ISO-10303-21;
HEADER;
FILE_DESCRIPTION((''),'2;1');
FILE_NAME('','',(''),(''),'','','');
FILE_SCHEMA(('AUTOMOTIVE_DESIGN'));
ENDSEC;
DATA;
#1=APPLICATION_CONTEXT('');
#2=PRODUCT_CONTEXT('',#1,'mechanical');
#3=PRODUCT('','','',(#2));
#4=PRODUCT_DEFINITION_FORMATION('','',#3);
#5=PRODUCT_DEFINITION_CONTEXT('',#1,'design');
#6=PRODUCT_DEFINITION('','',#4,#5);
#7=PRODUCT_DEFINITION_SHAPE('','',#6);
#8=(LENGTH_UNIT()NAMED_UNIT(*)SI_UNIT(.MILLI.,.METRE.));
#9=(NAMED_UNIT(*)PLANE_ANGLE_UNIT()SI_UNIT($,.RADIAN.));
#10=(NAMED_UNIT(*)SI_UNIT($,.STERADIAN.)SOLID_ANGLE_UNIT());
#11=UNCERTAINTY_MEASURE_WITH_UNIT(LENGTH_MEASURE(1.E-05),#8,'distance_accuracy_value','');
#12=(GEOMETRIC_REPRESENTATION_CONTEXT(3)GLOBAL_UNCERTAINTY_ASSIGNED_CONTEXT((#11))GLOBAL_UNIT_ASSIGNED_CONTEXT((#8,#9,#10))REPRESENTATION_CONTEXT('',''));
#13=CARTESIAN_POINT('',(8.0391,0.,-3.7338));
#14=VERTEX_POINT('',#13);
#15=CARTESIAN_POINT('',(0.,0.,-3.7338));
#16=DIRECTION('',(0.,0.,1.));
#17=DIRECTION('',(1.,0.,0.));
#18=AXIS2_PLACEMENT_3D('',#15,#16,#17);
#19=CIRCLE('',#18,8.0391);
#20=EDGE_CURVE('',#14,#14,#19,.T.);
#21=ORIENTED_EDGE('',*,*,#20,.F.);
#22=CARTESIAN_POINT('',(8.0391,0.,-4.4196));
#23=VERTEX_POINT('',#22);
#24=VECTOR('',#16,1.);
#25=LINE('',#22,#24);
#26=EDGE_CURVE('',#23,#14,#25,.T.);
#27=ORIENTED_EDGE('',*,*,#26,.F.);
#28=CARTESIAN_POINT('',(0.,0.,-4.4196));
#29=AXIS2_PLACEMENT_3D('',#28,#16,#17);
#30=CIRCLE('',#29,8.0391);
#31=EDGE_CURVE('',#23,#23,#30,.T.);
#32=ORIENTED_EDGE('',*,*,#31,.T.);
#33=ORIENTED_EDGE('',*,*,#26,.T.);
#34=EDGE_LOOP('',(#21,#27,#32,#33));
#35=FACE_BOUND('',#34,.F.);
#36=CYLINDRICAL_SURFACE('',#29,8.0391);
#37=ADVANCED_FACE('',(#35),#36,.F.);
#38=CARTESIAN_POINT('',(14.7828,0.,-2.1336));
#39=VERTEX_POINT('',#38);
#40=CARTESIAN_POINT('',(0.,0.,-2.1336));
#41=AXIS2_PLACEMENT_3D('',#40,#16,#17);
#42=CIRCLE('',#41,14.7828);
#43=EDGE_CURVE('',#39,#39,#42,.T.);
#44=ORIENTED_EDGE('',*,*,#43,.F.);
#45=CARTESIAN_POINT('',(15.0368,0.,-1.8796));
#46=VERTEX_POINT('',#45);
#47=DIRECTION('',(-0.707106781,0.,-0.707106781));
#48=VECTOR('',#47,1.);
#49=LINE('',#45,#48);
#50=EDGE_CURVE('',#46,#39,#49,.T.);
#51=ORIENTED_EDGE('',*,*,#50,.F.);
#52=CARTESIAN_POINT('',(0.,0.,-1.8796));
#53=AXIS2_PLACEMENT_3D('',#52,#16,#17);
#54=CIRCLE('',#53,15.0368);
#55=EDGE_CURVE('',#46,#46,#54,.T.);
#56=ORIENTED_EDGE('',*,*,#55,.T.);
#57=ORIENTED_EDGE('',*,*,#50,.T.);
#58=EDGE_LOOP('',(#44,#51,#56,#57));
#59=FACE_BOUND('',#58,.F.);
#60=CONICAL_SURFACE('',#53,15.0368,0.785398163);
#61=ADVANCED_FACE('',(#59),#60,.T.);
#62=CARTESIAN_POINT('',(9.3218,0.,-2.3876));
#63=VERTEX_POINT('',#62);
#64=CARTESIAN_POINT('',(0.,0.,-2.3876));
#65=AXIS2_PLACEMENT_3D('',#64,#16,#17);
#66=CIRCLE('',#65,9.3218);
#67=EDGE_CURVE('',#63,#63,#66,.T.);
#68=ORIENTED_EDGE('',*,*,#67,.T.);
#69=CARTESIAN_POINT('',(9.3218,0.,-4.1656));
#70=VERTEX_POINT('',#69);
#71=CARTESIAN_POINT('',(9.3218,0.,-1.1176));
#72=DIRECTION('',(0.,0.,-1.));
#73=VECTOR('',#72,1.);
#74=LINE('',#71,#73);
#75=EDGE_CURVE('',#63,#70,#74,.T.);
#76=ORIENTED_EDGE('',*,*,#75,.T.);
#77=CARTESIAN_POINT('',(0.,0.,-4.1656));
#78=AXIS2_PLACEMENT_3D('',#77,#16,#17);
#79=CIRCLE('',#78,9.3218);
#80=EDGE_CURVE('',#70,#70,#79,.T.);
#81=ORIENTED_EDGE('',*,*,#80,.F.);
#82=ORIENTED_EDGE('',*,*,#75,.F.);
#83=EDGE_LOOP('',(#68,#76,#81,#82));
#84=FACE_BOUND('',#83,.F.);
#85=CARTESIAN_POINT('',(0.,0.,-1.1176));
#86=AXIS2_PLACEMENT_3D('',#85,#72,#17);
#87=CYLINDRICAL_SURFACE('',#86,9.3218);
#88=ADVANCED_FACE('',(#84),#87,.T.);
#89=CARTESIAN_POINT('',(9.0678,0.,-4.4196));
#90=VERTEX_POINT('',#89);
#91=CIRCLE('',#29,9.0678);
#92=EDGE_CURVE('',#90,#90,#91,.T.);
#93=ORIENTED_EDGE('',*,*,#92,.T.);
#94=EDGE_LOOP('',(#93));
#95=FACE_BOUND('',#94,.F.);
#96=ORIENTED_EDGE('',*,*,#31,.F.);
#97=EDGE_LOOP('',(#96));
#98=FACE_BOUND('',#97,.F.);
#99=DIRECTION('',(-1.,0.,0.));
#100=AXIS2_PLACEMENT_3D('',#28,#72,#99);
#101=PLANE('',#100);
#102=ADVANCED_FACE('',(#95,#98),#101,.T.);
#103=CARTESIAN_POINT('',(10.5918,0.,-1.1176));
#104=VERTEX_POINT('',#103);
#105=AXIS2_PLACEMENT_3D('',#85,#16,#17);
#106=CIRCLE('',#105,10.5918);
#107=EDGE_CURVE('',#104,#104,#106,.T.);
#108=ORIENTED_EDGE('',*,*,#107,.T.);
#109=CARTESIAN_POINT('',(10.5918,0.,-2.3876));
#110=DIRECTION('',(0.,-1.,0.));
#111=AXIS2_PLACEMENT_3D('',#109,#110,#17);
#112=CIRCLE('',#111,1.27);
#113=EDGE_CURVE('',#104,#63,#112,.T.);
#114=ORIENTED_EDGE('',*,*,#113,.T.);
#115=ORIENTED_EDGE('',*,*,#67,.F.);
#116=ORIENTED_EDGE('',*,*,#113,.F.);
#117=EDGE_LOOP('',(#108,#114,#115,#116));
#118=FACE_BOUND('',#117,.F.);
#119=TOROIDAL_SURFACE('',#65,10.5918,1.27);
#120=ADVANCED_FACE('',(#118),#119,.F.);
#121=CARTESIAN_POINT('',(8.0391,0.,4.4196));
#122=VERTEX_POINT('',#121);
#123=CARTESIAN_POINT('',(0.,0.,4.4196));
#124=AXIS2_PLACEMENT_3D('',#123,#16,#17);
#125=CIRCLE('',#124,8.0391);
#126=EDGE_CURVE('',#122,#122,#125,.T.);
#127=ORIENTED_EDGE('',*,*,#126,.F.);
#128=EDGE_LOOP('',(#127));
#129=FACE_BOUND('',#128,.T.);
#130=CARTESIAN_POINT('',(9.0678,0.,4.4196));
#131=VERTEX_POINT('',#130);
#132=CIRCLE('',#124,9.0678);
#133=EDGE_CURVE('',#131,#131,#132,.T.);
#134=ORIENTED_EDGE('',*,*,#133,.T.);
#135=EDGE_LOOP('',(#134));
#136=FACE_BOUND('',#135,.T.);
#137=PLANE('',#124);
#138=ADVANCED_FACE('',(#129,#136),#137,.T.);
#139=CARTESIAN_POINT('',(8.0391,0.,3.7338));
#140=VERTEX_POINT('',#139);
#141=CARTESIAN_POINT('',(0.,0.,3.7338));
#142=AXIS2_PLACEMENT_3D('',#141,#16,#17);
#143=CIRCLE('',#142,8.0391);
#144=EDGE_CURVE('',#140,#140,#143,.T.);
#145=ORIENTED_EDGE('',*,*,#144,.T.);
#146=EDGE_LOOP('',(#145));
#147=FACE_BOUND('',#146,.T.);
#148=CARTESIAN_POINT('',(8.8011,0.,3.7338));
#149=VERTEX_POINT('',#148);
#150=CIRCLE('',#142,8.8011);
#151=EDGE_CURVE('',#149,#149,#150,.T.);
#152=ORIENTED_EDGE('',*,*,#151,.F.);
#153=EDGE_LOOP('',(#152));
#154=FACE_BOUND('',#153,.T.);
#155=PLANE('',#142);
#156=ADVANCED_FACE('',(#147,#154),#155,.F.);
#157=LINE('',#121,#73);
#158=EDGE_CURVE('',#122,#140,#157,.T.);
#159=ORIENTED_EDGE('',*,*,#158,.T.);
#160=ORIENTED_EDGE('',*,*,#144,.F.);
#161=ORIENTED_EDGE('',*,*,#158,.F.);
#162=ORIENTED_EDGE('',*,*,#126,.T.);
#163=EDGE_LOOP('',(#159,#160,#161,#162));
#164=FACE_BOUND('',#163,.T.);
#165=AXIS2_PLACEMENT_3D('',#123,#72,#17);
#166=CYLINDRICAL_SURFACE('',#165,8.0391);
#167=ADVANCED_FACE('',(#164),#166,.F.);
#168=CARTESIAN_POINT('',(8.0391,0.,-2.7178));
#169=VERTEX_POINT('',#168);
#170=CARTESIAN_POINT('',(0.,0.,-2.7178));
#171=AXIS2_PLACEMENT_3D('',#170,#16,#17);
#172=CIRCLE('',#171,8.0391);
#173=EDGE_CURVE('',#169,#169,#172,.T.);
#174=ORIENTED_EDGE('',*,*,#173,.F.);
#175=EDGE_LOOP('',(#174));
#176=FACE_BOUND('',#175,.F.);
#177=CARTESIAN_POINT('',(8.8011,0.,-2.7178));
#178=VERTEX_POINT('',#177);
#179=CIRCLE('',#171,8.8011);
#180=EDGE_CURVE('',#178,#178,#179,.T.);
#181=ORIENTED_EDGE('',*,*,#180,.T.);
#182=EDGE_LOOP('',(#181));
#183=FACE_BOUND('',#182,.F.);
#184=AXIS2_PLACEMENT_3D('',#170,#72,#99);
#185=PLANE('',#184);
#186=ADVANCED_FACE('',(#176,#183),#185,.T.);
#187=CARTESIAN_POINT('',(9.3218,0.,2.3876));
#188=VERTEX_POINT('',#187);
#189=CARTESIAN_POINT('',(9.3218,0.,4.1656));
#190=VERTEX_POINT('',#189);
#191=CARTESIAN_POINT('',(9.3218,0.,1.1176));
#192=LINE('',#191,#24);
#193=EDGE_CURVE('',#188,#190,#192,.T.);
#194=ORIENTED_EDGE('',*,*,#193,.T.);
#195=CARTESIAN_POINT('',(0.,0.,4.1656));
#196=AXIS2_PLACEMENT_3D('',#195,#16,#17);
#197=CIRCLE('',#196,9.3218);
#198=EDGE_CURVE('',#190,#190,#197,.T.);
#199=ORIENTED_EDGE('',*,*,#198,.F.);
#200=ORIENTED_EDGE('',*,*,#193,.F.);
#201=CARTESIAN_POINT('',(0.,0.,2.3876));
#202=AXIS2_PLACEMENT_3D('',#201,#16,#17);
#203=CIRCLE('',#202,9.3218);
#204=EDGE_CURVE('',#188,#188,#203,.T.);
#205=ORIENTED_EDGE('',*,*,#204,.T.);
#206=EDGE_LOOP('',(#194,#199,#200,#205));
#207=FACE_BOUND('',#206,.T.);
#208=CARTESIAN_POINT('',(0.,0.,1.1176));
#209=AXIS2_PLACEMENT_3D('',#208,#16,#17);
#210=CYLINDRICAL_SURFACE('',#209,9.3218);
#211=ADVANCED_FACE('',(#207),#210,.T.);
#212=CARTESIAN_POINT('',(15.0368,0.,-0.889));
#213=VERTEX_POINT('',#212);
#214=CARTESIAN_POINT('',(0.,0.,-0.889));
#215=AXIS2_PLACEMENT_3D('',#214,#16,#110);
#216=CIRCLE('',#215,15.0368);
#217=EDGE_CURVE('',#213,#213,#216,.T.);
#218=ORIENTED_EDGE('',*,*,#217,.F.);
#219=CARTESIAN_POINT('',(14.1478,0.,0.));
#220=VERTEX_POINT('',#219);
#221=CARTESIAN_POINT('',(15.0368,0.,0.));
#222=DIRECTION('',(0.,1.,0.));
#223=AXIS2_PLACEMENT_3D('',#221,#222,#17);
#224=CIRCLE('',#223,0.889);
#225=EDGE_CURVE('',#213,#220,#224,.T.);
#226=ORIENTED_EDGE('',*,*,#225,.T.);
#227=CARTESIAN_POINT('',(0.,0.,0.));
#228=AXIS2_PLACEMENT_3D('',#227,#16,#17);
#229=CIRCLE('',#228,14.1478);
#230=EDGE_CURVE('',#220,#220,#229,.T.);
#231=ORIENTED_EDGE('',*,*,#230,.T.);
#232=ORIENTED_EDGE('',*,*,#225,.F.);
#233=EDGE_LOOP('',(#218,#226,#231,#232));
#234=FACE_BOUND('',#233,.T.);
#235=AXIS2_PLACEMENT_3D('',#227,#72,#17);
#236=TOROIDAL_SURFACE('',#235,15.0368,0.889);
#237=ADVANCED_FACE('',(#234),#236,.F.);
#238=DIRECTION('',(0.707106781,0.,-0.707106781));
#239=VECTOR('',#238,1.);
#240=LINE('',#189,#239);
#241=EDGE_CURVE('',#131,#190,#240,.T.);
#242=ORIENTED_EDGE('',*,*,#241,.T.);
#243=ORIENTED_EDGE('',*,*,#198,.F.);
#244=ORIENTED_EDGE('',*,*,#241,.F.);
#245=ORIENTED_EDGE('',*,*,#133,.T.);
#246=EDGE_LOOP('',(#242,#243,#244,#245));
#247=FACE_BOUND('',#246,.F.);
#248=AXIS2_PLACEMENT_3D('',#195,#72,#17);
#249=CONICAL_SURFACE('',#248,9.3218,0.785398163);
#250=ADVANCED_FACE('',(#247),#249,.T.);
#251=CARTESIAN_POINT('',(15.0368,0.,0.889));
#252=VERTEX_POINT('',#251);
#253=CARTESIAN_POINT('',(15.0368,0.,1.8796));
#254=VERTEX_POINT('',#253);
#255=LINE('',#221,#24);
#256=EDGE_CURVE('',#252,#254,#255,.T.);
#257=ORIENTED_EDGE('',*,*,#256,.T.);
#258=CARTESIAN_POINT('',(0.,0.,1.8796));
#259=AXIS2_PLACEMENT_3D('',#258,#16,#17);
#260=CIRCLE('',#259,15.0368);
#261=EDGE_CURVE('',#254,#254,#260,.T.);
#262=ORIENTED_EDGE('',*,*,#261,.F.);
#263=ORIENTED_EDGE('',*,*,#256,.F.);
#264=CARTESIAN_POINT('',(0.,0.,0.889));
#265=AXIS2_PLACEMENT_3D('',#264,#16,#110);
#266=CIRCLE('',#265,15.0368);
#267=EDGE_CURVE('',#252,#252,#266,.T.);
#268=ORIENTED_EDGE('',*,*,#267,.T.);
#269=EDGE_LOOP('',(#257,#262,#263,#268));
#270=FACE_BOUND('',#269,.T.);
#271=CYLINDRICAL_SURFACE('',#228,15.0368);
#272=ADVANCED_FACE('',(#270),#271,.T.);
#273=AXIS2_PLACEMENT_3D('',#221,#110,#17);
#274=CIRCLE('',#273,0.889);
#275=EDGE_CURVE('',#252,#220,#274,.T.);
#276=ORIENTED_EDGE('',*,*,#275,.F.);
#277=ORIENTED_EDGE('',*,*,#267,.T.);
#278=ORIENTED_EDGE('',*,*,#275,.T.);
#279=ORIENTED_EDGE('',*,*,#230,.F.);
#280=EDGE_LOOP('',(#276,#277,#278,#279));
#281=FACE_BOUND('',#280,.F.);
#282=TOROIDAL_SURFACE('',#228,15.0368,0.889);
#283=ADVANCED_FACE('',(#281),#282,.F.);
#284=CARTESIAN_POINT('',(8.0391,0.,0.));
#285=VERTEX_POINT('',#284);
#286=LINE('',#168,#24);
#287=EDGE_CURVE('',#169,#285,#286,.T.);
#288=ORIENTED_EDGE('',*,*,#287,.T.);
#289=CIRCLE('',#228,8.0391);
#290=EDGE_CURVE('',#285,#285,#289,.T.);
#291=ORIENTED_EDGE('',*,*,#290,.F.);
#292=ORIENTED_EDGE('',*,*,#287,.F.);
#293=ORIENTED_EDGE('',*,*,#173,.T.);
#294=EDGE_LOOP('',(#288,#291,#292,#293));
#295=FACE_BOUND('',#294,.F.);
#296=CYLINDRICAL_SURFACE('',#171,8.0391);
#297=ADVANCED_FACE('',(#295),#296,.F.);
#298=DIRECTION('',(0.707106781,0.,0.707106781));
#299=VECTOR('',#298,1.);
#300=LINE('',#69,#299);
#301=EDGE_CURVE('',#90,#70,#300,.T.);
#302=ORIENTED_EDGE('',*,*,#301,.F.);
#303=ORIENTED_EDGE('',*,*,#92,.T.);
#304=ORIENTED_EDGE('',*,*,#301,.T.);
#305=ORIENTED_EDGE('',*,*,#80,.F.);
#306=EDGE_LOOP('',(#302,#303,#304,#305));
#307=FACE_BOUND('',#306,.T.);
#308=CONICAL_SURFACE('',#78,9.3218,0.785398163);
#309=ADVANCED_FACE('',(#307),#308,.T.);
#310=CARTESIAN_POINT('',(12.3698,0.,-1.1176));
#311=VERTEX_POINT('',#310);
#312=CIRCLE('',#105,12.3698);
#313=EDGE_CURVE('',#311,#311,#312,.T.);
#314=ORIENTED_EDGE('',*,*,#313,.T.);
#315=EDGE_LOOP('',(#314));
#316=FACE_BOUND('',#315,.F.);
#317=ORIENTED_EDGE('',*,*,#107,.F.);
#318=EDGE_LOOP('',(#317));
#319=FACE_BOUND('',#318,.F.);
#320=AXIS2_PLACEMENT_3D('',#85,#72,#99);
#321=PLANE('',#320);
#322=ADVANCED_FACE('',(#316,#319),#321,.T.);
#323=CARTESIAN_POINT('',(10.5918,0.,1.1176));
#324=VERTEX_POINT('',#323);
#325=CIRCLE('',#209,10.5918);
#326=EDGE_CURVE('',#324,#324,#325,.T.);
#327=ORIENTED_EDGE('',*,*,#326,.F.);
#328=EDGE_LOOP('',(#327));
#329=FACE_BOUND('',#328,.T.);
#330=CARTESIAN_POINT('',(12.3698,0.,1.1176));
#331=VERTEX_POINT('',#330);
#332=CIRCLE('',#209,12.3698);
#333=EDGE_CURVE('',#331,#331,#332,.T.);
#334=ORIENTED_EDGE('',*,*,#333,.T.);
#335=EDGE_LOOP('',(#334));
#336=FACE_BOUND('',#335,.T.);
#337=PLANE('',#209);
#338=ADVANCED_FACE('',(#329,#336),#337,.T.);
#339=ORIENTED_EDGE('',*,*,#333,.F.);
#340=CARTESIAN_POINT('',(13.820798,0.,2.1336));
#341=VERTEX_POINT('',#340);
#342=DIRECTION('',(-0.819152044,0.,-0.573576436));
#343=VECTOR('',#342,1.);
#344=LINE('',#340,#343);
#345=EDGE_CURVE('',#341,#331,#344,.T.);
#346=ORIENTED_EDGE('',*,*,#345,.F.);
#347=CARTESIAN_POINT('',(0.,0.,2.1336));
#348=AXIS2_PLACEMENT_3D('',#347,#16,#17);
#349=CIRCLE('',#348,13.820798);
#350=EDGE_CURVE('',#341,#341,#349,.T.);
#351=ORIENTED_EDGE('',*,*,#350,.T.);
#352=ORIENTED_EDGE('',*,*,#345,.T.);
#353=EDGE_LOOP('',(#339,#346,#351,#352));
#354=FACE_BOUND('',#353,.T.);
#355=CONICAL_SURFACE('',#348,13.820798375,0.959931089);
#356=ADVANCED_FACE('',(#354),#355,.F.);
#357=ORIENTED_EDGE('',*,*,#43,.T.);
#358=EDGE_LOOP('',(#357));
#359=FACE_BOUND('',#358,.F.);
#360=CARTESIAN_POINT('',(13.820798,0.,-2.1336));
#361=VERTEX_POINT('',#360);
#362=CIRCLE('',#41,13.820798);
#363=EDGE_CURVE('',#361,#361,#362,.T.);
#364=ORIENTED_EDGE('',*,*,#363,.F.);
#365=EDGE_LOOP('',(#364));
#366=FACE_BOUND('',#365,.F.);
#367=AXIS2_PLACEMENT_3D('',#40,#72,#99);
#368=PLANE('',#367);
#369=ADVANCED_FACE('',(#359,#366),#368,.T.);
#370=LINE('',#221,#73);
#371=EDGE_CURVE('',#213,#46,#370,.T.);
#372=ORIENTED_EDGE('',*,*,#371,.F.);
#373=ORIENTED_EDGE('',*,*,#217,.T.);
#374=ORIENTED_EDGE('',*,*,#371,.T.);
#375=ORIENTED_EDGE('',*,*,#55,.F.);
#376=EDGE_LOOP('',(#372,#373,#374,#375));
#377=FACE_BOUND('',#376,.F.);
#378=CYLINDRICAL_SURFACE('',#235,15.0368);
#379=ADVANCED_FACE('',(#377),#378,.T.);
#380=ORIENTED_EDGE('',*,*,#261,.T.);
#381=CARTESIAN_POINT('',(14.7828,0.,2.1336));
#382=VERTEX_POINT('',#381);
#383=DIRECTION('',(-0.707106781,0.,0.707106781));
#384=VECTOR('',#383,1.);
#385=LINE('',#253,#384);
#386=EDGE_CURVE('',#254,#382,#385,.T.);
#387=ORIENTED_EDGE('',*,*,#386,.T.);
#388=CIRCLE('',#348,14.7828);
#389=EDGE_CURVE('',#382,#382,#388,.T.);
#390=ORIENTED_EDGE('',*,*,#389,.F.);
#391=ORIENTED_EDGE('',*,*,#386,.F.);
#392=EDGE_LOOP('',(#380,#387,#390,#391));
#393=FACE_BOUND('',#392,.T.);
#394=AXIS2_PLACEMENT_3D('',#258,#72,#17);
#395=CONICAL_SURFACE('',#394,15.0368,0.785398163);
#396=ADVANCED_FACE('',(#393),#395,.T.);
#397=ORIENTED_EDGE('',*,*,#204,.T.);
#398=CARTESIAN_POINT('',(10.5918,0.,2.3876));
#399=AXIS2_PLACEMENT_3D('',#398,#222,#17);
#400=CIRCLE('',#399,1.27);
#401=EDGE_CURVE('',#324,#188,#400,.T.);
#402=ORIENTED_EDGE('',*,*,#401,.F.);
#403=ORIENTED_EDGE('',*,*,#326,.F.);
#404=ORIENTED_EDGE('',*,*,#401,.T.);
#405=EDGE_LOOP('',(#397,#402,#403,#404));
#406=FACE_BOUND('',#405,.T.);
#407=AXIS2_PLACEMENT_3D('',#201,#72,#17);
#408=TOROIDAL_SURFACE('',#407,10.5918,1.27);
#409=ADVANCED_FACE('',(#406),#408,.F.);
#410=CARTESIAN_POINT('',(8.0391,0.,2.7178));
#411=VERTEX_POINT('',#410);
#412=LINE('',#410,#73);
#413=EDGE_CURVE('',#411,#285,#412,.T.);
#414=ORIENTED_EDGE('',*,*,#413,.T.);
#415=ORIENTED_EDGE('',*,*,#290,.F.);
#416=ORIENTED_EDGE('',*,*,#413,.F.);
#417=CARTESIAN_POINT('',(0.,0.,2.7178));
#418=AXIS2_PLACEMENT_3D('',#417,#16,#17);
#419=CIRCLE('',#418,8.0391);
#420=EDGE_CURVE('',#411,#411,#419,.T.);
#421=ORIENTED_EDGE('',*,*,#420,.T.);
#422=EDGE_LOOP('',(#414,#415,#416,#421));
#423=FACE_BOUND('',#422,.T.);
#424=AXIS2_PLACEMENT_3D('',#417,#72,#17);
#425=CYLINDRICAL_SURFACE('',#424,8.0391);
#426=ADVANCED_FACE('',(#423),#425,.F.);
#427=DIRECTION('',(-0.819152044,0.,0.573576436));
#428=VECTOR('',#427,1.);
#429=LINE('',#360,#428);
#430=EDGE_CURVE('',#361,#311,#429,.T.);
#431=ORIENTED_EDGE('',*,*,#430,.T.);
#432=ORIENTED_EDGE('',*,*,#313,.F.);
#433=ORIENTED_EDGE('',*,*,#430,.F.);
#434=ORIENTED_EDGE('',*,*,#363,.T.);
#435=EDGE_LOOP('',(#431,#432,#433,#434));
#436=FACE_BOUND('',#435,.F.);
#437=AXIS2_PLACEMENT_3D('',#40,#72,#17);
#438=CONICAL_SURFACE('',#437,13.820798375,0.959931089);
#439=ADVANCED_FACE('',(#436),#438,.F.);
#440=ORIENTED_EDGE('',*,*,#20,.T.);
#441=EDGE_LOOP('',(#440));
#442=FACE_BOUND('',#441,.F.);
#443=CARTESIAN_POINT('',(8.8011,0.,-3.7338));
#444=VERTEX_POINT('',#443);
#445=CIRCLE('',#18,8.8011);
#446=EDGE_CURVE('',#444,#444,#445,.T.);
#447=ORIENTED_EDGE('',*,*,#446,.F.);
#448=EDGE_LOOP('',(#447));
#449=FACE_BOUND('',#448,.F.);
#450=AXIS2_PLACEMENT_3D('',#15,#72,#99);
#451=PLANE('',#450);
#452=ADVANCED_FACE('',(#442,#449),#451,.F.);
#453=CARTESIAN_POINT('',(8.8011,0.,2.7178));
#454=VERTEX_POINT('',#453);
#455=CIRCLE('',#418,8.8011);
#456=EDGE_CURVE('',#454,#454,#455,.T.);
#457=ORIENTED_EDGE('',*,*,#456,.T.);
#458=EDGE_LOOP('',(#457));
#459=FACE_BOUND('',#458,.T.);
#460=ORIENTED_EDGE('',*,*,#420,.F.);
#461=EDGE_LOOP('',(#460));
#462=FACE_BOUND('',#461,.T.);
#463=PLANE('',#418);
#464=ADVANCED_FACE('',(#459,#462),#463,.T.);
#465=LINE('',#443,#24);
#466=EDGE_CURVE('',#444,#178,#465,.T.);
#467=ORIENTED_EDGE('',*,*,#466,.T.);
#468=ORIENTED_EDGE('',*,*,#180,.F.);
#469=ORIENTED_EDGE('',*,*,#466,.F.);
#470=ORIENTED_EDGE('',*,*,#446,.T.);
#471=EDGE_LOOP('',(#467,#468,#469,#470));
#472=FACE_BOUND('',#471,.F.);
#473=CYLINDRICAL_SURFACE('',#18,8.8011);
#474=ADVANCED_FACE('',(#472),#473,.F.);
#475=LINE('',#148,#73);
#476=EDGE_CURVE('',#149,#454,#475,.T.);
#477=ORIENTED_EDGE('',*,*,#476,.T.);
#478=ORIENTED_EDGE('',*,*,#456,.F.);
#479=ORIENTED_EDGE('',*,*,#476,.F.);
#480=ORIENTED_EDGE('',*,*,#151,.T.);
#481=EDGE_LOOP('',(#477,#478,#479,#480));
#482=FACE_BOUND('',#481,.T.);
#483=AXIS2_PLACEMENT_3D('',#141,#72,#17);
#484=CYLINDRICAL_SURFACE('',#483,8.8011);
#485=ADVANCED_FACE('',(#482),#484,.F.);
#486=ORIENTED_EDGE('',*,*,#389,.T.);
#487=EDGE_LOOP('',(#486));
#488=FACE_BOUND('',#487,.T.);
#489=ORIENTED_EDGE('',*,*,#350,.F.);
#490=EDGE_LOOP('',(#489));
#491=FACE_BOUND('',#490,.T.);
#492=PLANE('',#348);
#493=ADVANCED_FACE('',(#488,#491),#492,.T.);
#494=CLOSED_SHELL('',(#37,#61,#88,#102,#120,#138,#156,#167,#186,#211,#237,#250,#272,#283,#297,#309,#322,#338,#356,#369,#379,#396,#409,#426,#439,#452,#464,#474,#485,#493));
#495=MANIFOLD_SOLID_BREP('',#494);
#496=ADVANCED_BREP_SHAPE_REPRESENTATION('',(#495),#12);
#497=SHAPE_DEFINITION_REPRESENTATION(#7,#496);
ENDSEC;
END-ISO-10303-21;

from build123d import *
from build123d import SkipClean  # not in build123d's __all__

# Parameters (mm, degrees)
F2_R    = 0.889
F4_SIZE = 0.254
F5_R    = 1.27


with BuildPart() as f1:
    # F0 (on Front) → F1 (revolve)
    with BuildSketch(Plane.XZ):
        Polygon((8.0391, 2.7178), (8.0391, 0), (15.0368, 0), (15.0368, 2.1336), (13.8207983748, 2.1336), (12.3698, 1.1176), (9.3218, 1.1176), (9.3218, 4.4196), (8.0391, 4.4196), (8.0391, 3.7338), (8.8011, 3.7338), (8.8011, 2.7178), align=None)
    revolve(axis=Axis((0, 0, 18.0261821733), (0, 0, 1)))

    # F2 (on Front) → F3 (revolve, cut)
    with BuildSketch(Plane.XZ):
        with Locations((15.0368, 0)):
            Circle(F2_R)
    revolve(axis=Axis((0, 0, 18.0261821733), (0, 0, 1)), mode=Mode.SUBTRACT)

    # F4
    f4_edges = [f1.edges().sort_by_distance(p)[0] for p in [
        (-15.0368, 0, 2.1336),
        (-9.3218, 0, 4.4196),
    ]]
    chamfer(f4_edges, length=F4_SIZE)

    # F5
    f5_edges = [f1.edges().sort_by_distance(p)[0] for p in [
        (-9.3218, 0, 1.1176),
    ]]
    fillet(f5_edges, radius=F5_R)

    # F6: F1 across plane


with BuildPart() as f1_1:
    add(f1.part, clean=False)
    with SkipClean():  # cleaning this boolean's faces spoils the solid; the shape is the same uncleaned
        add(f1.part.mirror(Plane.XY), clean=False)


solid = f1_1.part
